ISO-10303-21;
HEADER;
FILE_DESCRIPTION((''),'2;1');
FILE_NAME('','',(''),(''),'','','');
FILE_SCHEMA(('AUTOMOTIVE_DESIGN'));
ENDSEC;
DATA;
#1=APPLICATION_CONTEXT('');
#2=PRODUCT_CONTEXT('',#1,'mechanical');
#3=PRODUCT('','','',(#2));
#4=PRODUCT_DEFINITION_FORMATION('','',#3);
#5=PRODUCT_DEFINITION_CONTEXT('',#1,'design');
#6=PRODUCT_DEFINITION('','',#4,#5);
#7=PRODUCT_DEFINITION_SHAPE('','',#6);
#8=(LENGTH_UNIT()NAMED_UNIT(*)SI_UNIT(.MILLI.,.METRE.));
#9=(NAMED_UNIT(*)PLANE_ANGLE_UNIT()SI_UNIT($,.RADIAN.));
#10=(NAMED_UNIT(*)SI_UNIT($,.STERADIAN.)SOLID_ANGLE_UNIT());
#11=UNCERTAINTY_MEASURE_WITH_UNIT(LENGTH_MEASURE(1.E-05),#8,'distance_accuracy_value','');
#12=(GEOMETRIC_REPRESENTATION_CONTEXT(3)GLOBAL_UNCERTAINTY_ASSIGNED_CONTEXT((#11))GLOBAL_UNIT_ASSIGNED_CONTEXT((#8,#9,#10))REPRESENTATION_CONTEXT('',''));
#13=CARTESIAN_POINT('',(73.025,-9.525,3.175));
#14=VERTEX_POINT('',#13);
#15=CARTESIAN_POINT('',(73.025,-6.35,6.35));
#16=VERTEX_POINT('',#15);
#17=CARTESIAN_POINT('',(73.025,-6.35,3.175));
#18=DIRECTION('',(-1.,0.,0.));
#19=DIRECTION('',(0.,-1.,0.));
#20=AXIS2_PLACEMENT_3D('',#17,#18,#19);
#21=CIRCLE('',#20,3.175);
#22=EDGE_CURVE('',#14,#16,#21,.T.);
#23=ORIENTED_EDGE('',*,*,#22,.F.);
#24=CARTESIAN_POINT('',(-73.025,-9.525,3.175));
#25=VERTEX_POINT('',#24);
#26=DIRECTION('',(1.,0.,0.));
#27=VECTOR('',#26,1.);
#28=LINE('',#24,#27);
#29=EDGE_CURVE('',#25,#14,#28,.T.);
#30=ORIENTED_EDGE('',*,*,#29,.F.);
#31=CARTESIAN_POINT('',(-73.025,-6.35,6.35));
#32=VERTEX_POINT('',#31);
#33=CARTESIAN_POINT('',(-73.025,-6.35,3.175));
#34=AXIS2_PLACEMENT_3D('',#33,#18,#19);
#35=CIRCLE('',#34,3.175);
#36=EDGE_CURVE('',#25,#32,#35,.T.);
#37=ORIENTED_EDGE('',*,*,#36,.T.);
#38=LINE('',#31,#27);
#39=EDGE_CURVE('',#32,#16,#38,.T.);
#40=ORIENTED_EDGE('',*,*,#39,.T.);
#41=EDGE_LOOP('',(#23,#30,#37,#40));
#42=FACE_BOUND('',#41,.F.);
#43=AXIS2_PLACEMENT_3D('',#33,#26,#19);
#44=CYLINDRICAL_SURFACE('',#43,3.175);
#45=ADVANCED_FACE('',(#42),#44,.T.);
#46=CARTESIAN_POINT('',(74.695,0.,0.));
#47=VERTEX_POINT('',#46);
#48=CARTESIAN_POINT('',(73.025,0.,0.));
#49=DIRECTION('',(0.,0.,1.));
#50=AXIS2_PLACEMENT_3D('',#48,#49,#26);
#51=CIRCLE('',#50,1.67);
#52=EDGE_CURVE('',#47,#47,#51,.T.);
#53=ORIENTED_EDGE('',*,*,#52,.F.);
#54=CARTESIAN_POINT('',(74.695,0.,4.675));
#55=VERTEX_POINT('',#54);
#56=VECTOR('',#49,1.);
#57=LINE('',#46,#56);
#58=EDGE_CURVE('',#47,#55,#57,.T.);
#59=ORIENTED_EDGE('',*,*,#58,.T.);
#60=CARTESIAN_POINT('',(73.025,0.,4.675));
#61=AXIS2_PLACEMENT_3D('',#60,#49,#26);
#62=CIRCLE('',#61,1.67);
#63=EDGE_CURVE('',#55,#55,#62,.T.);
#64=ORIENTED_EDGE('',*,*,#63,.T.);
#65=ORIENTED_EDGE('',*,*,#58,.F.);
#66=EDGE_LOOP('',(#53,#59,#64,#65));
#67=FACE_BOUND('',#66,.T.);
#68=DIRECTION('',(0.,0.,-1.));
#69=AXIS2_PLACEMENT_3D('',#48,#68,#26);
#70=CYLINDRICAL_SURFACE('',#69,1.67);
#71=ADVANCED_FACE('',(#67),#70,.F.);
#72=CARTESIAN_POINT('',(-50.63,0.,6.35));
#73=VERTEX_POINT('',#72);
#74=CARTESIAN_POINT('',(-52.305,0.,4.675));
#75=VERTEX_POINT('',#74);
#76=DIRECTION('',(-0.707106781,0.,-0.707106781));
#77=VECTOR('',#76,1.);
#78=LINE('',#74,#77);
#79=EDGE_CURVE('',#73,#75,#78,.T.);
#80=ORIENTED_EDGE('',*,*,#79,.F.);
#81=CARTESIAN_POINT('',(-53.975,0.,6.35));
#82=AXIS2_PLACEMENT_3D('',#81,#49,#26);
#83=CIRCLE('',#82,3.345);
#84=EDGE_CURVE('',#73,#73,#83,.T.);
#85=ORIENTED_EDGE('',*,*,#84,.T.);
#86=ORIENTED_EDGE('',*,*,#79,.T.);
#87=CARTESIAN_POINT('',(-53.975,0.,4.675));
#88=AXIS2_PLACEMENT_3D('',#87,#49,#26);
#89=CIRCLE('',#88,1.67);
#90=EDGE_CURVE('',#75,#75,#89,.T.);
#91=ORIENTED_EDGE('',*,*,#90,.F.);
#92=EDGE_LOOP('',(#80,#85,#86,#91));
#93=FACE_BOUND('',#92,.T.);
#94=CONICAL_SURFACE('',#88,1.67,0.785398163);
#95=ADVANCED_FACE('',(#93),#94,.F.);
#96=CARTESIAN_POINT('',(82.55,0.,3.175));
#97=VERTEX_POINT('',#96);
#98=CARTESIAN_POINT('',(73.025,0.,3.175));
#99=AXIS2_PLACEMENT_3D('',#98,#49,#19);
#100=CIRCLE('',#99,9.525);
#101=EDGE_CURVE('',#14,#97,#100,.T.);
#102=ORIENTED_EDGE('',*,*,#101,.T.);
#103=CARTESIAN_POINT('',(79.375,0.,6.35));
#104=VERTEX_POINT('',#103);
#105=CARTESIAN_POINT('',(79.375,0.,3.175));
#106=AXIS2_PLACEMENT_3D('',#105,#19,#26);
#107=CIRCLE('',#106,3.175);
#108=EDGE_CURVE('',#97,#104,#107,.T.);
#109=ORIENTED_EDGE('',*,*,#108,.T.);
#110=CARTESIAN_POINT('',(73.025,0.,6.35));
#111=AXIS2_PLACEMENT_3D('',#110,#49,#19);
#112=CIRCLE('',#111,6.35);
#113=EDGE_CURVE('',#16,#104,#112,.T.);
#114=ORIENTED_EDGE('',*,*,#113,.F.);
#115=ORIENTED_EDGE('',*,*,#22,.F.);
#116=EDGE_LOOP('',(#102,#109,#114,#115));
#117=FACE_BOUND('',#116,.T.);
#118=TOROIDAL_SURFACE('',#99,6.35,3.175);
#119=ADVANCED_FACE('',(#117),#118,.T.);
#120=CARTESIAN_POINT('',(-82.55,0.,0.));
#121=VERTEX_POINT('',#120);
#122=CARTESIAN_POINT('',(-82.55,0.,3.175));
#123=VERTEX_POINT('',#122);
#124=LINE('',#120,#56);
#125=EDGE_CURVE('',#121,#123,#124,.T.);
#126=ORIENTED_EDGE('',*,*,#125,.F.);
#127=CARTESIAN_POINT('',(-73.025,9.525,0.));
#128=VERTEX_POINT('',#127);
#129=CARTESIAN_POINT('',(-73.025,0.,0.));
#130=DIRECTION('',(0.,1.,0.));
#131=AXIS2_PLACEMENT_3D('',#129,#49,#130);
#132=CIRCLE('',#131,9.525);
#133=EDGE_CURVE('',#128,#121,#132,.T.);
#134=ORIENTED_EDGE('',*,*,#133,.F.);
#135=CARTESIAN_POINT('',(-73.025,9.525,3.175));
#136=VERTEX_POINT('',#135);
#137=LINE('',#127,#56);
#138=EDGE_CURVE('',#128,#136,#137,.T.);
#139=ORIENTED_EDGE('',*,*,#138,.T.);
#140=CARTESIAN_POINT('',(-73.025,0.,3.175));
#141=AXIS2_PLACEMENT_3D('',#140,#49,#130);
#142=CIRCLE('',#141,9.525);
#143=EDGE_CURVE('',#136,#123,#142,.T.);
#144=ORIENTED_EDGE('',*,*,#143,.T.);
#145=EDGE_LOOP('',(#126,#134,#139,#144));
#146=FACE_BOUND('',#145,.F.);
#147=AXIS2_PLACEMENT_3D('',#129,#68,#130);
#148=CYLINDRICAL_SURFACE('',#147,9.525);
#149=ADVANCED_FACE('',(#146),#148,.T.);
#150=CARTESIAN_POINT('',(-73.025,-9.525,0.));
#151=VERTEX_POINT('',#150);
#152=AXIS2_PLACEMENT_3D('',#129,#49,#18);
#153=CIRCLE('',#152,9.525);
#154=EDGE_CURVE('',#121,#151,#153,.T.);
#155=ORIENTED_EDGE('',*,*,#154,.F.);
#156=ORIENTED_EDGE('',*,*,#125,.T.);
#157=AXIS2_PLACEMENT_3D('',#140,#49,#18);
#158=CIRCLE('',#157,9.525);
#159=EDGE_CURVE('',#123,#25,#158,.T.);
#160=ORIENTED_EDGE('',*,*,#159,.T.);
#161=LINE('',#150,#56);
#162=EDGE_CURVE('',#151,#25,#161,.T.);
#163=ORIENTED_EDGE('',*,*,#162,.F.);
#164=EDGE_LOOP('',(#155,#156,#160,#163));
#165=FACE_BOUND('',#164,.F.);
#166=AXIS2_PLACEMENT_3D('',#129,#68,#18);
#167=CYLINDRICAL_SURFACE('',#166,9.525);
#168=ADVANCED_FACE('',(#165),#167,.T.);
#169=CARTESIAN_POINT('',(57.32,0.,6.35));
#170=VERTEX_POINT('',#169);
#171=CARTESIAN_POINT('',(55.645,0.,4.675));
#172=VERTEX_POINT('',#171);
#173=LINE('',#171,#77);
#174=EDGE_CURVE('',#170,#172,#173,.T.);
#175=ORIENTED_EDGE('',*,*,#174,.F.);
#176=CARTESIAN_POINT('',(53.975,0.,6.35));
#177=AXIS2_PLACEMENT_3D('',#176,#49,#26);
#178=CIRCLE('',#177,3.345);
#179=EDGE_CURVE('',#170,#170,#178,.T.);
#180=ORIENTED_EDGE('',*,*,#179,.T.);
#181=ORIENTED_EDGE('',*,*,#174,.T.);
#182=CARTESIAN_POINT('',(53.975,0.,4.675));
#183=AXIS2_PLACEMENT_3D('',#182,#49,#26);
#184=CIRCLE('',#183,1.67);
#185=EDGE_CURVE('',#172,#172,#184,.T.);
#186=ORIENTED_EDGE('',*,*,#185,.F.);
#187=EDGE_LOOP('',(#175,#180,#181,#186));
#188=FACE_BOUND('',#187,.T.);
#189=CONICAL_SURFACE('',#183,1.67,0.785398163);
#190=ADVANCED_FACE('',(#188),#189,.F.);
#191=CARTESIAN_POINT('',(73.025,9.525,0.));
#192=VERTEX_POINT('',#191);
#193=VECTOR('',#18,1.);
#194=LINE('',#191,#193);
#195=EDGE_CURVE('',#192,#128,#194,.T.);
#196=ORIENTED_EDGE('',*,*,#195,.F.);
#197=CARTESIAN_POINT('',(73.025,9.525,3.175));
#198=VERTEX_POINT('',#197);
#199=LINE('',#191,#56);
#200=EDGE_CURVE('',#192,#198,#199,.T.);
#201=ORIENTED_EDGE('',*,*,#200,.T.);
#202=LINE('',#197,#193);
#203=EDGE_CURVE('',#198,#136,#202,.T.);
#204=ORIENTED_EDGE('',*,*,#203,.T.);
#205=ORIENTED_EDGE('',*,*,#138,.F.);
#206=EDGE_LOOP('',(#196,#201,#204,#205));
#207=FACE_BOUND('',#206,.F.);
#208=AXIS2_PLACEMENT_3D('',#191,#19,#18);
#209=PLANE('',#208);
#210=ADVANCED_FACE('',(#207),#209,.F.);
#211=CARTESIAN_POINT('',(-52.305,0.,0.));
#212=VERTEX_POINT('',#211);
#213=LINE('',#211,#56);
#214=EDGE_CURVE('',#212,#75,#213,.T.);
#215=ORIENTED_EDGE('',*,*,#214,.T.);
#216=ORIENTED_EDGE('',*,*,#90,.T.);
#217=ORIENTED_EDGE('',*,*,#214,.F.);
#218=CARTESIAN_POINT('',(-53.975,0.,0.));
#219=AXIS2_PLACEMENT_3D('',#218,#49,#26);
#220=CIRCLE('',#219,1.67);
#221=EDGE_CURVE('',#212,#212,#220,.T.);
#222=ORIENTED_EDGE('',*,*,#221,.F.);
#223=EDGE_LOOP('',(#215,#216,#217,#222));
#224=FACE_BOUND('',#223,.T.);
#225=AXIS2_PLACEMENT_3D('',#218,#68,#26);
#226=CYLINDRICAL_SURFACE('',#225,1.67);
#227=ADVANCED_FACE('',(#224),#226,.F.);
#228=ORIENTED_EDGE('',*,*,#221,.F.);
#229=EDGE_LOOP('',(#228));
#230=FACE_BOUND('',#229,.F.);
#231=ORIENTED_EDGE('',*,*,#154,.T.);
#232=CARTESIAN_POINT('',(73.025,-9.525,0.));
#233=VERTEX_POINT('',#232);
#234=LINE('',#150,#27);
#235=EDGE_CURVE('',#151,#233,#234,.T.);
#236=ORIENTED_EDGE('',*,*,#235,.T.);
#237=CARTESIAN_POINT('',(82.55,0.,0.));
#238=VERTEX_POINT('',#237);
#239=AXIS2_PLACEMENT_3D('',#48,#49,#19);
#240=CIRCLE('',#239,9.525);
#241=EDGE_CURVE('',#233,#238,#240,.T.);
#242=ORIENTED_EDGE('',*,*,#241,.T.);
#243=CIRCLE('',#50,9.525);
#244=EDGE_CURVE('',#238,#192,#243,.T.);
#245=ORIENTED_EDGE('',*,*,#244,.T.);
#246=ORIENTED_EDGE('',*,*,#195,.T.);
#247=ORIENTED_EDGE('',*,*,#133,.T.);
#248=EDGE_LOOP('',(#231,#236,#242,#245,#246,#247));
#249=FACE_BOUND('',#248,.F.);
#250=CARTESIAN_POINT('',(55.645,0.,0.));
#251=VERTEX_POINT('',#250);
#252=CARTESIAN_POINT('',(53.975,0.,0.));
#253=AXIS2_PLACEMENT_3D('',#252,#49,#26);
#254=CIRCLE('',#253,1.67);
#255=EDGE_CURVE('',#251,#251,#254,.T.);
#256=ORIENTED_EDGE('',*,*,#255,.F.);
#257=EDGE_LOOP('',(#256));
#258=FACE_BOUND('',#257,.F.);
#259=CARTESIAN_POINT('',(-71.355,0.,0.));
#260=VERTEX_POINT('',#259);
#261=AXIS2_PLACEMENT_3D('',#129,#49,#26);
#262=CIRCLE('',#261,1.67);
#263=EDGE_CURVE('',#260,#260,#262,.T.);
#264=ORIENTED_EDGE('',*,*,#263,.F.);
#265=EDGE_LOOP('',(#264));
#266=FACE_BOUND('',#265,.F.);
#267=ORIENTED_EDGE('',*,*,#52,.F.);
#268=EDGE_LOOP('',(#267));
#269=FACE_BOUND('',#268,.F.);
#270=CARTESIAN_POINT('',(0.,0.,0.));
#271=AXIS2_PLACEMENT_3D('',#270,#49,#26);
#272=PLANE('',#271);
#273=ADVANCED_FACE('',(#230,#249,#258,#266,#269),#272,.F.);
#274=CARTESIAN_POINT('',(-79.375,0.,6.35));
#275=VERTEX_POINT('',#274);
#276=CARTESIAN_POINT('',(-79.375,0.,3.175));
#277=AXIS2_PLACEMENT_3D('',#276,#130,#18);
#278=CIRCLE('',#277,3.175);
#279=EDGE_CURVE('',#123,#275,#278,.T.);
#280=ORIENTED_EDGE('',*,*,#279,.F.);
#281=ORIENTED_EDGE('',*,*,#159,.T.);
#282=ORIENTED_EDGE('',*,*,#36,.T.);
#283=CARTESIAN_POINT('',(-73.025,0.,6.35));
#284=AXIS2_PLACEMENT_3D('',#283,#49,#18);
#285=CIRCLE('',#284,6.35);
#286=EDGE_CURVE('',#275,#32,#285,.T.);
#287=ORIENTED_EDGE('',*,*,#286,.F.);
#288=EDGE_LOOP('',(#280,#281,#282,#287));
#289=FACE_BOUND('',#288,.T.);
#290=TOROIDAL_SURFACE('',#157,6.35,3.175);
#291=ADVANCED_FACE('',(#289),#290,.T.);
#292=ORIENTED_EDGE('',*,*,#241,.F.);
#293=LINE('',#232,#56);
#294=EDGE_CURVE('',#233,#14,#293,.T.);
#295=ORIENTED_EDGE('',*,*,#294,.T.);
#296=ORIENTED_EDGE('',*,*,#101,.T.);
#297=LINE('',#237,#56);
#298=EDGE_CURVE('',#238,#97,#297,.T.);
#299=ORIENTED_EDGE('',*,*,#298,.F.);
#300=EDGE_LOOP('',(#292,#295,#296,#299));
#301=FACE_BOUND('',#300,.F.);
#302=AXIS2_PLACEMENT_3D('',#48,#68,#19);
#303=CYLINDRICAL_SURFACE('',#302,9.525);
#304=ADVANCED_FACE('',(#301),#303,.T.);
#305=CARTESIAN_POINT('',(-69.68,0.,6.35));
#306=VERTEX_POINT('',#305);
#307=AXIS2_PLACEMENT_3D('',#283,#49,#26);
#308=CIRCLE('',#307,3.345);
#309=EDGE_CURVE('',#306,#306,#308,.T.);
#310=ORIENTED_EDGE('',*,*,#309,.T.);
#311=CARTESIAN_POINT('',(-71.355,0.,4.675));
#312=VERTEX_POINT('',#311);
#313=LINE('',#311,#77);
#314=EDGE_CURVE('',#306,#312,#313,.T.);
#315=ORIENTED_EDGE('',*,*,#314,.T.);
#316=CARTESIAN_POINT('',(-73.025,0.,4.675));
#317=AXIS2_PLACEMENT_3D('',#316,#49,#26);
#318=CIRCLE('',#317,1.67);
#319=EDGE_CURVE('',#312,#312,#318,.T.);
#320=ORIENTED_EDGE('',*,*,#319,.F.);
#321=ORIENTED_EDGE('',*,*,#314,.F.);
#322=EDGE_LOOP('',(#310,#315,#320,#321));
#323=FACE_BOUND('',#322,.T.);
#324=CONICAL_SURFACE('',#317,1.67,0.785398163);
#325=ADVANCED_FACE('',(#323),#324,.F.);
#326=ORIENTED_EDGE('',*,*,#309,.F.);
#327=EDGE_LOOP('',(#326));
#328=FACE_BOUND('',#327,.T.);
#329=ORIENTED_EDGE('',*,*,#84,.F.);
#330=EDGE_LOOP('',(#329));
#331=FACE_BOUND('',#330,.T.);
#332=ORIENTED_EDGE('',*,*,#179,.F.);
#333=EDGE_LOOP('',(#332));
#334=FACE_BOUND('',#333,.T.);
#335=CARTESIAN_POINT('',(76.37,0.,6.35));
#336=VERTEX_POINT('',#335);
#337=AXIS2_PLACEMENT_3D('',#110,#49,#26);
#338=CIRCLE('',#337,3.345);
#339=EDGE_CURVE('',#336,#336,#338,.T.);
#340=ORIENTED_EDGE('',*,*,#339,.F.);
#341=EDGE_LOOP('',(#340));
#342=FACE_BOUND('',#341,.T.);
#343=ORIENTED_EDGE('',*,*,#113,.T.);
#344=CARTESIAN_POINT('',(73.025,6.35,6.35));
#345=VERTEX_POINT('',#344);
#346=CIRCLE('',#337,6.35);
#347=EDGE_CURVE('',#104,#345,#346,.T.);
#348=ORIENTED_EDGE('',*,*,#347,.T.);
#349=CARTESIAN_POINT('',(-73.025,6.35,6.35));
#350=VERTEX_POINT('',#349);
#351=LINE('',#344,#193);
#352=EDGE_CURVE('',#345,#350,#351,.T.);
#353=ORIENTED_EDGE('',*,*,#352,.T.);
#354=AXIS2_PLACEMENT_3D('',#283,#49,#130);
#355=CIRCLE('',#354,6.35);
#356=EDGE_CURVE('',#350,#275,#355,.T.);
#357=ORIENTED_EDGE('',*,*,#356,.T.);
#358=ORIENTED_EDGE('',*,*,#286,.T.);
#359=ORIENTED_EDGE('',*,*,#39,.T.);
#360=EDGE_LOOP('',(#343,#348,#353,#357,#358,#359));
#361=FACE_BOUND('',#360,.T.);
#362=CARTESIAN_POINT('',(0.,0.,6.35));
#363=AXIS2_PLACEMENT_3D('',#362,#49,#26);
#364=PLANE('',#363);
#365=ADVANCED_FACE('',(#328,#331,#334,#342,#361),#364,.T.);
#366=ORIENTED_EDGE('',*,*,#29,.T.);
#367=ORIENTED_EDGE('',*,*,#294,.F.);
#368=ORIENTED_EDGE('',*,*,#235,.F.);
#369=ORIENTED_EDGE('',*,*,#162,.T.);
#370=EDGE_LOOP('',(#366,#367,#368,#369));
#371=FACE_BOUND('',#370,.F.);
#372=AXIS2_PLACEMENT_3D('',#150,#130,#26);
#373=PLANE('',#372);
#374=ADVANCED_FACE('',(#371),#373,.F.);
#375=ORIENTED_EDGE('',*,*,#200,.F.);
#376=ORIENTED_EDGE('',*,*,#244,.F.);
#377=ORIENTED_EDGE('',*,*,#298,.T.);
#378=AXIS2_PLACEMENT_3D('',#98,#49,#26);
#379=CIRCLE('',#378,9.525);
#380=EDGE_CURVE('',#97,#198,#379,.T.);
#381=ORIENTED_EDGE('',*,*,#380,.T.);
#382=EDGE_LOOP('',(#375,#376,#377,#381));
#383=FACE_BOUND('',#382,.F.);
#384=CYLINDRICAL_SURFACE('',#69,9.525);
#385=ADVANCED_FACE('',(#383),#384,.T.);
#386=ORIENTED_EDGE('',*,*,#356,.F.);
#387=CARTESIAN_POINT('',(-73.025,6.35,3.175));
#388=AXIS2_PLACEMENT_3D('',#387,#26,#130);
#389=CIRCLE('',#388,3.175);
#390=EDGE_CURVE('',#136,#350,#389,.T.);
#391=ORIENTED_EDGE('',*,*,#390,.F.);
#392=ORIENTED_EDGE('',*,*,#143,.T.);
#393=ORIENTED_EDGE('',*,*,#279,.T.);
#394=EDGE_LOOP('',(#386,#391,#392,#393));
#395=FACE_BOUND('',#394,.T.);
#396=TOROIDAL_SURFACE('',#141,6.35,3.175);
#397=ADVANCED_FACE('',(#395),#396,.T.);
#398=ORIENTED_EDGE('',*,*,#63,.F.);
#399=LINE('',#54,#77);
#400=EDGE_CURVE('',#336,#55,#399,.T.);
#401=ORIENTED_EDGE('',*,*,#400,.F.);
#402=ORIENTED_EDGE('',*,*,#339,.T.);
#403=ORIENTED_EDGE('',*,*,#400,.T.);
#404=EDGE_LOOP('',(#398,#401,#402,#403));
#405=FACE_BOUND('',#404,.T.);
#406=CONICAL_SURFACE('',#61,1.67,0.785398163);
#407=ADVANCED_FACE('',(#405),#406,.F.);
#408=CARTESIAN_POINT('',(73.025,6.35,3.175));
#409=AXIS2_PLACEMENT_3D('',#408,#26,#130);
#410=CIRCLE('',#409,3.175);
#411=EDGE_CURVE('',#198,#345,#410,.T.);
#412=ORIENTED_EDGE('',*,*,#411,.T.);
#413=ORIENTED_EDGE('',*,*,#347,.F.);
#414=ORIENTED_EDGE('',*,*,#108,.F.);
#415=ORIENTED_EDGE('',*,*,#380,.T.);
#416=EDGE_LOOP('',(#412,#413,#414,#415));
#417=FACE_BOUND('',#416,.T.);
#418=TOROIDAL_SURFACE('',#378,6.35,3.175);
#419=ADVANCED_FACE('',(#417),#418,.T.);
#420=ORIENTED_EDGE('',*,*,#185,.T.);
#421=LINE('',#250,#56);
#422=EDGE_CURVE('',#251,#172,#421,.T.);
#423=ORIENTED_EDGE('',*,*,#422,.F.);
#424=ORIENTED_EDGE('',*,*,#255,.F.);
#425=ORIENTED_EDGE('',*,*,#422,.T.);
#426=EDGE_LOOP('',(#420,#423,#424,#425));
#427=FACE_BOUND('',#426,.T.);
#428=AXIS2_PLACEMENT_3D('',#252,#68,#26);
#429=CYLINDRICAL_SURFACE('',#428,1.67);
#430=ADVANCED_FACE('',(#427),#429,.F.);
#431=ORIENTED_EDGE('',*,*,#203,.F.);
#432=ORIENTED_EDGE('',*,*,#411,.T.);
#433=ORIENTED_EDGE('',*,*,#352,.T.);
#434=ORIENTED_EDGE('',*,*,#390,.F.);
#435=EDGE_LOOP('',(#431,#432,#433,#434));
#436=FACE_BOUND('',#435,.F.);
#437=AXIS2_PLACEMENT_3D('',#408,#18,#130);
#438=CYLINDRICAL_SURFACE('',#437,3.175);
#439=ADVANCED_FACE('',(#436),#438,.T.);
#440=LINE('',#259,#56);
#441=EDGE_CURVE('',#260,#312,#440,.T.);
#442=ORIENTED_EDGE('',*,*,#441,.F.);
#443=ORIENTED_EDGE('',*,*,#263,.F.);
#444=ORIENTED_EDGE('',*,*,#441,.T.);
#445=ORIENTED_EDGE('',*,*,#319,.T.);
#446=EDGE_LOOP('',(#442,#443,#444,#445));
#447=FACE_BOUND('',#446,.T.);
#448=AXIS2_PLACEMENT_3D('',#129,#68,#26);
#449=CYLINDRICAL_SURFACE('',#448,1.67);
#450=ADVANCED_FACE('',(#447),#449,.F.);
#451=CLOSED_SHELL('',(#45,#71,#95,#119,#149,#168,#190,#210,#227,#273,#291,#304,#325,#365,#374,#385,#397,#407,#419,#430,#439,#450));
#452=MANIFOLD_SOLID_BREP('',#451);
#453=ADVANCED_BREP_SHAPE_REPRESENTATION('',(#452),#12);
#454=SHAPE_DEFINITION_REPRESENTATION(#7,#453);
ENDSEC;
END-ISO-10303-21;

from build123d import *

# Parameters (mm, degrees)
F0_R     = 1.67
F1_DEPTH = 6.35
F2_R     = 3.175
F3_SIZE  = 1.675


with BuildPart() as f1:
    # F0 (on Top) → F1 (new body)
    with BuildSketch(Plane.XY):
        with BuildLine():
            Line((73.025, 9.525), (63.5, 9.525))
            Line((63.5, 9.525), (-63.5, 9.525))
            Line((-63.5, 9.525), (-73.025, 9.525))
            ThreePointArc((-73.025, 9.525), (-79.7601920908, 6.7351920908), (-82.55, 0))
            ThreePointArc((-82.55, 0), (-79.7601920908, -6.7351920908), (-73.025, -9.525))
            Line((-73.025, -9.525), (-63.5, -9.525))
            Line((-63.5, -9.525), (63.5, -9.525))
            Line((63.5, -9.525), (73.025, -9.525))
            ThreePointArc((73.025, -9.525), (79.7601920908, -6.7351920908), (82.55, 0))
            ThreePointArc((82.55, 0), (79.7601920908, 6.7351920908), (73.025, 9.525))
        make_face()
        with Locations((-73.025, 0)):
            Circle(F0_R, mode=Mode.SUBTRACT)
        with Locations((-53.975, 0)):
            Circle(F0_R, mode=Mode.SUBTRACT)
        with Locations((53.975, 0)):
            Circle(F0_R, mode=Mode.SUBTRACT)
        with Locations((73.025, 0)):
            Circle(F0_R, mode=Mode.SUBTRACT)
    extrude(amount=F1_DEPTH)

    # F2
    f2_edges = [f1.edges().sort_by_distance(p)[0] for p in [
        (-82.55, 0, 6.35),
        (82.55, 0, 6.35),
        (0, 9.525, 6.35),
        (0, -9.525, 6.35),
    ]]
    fillet(f2_edges, radius=F2_R)

    # F3
    f3_edges = [f1.edges().sort_by_distance(p)[0] for p in [
        (-74.695, 0, 6.35),
        (-55.645, 0, 6.35),
        (52.305, 0, 6.35),
        (71.355, 0, 6.35),
    ]]
    chamfer(f3_edges, length=F3_SIZE)


solid = f1.part
